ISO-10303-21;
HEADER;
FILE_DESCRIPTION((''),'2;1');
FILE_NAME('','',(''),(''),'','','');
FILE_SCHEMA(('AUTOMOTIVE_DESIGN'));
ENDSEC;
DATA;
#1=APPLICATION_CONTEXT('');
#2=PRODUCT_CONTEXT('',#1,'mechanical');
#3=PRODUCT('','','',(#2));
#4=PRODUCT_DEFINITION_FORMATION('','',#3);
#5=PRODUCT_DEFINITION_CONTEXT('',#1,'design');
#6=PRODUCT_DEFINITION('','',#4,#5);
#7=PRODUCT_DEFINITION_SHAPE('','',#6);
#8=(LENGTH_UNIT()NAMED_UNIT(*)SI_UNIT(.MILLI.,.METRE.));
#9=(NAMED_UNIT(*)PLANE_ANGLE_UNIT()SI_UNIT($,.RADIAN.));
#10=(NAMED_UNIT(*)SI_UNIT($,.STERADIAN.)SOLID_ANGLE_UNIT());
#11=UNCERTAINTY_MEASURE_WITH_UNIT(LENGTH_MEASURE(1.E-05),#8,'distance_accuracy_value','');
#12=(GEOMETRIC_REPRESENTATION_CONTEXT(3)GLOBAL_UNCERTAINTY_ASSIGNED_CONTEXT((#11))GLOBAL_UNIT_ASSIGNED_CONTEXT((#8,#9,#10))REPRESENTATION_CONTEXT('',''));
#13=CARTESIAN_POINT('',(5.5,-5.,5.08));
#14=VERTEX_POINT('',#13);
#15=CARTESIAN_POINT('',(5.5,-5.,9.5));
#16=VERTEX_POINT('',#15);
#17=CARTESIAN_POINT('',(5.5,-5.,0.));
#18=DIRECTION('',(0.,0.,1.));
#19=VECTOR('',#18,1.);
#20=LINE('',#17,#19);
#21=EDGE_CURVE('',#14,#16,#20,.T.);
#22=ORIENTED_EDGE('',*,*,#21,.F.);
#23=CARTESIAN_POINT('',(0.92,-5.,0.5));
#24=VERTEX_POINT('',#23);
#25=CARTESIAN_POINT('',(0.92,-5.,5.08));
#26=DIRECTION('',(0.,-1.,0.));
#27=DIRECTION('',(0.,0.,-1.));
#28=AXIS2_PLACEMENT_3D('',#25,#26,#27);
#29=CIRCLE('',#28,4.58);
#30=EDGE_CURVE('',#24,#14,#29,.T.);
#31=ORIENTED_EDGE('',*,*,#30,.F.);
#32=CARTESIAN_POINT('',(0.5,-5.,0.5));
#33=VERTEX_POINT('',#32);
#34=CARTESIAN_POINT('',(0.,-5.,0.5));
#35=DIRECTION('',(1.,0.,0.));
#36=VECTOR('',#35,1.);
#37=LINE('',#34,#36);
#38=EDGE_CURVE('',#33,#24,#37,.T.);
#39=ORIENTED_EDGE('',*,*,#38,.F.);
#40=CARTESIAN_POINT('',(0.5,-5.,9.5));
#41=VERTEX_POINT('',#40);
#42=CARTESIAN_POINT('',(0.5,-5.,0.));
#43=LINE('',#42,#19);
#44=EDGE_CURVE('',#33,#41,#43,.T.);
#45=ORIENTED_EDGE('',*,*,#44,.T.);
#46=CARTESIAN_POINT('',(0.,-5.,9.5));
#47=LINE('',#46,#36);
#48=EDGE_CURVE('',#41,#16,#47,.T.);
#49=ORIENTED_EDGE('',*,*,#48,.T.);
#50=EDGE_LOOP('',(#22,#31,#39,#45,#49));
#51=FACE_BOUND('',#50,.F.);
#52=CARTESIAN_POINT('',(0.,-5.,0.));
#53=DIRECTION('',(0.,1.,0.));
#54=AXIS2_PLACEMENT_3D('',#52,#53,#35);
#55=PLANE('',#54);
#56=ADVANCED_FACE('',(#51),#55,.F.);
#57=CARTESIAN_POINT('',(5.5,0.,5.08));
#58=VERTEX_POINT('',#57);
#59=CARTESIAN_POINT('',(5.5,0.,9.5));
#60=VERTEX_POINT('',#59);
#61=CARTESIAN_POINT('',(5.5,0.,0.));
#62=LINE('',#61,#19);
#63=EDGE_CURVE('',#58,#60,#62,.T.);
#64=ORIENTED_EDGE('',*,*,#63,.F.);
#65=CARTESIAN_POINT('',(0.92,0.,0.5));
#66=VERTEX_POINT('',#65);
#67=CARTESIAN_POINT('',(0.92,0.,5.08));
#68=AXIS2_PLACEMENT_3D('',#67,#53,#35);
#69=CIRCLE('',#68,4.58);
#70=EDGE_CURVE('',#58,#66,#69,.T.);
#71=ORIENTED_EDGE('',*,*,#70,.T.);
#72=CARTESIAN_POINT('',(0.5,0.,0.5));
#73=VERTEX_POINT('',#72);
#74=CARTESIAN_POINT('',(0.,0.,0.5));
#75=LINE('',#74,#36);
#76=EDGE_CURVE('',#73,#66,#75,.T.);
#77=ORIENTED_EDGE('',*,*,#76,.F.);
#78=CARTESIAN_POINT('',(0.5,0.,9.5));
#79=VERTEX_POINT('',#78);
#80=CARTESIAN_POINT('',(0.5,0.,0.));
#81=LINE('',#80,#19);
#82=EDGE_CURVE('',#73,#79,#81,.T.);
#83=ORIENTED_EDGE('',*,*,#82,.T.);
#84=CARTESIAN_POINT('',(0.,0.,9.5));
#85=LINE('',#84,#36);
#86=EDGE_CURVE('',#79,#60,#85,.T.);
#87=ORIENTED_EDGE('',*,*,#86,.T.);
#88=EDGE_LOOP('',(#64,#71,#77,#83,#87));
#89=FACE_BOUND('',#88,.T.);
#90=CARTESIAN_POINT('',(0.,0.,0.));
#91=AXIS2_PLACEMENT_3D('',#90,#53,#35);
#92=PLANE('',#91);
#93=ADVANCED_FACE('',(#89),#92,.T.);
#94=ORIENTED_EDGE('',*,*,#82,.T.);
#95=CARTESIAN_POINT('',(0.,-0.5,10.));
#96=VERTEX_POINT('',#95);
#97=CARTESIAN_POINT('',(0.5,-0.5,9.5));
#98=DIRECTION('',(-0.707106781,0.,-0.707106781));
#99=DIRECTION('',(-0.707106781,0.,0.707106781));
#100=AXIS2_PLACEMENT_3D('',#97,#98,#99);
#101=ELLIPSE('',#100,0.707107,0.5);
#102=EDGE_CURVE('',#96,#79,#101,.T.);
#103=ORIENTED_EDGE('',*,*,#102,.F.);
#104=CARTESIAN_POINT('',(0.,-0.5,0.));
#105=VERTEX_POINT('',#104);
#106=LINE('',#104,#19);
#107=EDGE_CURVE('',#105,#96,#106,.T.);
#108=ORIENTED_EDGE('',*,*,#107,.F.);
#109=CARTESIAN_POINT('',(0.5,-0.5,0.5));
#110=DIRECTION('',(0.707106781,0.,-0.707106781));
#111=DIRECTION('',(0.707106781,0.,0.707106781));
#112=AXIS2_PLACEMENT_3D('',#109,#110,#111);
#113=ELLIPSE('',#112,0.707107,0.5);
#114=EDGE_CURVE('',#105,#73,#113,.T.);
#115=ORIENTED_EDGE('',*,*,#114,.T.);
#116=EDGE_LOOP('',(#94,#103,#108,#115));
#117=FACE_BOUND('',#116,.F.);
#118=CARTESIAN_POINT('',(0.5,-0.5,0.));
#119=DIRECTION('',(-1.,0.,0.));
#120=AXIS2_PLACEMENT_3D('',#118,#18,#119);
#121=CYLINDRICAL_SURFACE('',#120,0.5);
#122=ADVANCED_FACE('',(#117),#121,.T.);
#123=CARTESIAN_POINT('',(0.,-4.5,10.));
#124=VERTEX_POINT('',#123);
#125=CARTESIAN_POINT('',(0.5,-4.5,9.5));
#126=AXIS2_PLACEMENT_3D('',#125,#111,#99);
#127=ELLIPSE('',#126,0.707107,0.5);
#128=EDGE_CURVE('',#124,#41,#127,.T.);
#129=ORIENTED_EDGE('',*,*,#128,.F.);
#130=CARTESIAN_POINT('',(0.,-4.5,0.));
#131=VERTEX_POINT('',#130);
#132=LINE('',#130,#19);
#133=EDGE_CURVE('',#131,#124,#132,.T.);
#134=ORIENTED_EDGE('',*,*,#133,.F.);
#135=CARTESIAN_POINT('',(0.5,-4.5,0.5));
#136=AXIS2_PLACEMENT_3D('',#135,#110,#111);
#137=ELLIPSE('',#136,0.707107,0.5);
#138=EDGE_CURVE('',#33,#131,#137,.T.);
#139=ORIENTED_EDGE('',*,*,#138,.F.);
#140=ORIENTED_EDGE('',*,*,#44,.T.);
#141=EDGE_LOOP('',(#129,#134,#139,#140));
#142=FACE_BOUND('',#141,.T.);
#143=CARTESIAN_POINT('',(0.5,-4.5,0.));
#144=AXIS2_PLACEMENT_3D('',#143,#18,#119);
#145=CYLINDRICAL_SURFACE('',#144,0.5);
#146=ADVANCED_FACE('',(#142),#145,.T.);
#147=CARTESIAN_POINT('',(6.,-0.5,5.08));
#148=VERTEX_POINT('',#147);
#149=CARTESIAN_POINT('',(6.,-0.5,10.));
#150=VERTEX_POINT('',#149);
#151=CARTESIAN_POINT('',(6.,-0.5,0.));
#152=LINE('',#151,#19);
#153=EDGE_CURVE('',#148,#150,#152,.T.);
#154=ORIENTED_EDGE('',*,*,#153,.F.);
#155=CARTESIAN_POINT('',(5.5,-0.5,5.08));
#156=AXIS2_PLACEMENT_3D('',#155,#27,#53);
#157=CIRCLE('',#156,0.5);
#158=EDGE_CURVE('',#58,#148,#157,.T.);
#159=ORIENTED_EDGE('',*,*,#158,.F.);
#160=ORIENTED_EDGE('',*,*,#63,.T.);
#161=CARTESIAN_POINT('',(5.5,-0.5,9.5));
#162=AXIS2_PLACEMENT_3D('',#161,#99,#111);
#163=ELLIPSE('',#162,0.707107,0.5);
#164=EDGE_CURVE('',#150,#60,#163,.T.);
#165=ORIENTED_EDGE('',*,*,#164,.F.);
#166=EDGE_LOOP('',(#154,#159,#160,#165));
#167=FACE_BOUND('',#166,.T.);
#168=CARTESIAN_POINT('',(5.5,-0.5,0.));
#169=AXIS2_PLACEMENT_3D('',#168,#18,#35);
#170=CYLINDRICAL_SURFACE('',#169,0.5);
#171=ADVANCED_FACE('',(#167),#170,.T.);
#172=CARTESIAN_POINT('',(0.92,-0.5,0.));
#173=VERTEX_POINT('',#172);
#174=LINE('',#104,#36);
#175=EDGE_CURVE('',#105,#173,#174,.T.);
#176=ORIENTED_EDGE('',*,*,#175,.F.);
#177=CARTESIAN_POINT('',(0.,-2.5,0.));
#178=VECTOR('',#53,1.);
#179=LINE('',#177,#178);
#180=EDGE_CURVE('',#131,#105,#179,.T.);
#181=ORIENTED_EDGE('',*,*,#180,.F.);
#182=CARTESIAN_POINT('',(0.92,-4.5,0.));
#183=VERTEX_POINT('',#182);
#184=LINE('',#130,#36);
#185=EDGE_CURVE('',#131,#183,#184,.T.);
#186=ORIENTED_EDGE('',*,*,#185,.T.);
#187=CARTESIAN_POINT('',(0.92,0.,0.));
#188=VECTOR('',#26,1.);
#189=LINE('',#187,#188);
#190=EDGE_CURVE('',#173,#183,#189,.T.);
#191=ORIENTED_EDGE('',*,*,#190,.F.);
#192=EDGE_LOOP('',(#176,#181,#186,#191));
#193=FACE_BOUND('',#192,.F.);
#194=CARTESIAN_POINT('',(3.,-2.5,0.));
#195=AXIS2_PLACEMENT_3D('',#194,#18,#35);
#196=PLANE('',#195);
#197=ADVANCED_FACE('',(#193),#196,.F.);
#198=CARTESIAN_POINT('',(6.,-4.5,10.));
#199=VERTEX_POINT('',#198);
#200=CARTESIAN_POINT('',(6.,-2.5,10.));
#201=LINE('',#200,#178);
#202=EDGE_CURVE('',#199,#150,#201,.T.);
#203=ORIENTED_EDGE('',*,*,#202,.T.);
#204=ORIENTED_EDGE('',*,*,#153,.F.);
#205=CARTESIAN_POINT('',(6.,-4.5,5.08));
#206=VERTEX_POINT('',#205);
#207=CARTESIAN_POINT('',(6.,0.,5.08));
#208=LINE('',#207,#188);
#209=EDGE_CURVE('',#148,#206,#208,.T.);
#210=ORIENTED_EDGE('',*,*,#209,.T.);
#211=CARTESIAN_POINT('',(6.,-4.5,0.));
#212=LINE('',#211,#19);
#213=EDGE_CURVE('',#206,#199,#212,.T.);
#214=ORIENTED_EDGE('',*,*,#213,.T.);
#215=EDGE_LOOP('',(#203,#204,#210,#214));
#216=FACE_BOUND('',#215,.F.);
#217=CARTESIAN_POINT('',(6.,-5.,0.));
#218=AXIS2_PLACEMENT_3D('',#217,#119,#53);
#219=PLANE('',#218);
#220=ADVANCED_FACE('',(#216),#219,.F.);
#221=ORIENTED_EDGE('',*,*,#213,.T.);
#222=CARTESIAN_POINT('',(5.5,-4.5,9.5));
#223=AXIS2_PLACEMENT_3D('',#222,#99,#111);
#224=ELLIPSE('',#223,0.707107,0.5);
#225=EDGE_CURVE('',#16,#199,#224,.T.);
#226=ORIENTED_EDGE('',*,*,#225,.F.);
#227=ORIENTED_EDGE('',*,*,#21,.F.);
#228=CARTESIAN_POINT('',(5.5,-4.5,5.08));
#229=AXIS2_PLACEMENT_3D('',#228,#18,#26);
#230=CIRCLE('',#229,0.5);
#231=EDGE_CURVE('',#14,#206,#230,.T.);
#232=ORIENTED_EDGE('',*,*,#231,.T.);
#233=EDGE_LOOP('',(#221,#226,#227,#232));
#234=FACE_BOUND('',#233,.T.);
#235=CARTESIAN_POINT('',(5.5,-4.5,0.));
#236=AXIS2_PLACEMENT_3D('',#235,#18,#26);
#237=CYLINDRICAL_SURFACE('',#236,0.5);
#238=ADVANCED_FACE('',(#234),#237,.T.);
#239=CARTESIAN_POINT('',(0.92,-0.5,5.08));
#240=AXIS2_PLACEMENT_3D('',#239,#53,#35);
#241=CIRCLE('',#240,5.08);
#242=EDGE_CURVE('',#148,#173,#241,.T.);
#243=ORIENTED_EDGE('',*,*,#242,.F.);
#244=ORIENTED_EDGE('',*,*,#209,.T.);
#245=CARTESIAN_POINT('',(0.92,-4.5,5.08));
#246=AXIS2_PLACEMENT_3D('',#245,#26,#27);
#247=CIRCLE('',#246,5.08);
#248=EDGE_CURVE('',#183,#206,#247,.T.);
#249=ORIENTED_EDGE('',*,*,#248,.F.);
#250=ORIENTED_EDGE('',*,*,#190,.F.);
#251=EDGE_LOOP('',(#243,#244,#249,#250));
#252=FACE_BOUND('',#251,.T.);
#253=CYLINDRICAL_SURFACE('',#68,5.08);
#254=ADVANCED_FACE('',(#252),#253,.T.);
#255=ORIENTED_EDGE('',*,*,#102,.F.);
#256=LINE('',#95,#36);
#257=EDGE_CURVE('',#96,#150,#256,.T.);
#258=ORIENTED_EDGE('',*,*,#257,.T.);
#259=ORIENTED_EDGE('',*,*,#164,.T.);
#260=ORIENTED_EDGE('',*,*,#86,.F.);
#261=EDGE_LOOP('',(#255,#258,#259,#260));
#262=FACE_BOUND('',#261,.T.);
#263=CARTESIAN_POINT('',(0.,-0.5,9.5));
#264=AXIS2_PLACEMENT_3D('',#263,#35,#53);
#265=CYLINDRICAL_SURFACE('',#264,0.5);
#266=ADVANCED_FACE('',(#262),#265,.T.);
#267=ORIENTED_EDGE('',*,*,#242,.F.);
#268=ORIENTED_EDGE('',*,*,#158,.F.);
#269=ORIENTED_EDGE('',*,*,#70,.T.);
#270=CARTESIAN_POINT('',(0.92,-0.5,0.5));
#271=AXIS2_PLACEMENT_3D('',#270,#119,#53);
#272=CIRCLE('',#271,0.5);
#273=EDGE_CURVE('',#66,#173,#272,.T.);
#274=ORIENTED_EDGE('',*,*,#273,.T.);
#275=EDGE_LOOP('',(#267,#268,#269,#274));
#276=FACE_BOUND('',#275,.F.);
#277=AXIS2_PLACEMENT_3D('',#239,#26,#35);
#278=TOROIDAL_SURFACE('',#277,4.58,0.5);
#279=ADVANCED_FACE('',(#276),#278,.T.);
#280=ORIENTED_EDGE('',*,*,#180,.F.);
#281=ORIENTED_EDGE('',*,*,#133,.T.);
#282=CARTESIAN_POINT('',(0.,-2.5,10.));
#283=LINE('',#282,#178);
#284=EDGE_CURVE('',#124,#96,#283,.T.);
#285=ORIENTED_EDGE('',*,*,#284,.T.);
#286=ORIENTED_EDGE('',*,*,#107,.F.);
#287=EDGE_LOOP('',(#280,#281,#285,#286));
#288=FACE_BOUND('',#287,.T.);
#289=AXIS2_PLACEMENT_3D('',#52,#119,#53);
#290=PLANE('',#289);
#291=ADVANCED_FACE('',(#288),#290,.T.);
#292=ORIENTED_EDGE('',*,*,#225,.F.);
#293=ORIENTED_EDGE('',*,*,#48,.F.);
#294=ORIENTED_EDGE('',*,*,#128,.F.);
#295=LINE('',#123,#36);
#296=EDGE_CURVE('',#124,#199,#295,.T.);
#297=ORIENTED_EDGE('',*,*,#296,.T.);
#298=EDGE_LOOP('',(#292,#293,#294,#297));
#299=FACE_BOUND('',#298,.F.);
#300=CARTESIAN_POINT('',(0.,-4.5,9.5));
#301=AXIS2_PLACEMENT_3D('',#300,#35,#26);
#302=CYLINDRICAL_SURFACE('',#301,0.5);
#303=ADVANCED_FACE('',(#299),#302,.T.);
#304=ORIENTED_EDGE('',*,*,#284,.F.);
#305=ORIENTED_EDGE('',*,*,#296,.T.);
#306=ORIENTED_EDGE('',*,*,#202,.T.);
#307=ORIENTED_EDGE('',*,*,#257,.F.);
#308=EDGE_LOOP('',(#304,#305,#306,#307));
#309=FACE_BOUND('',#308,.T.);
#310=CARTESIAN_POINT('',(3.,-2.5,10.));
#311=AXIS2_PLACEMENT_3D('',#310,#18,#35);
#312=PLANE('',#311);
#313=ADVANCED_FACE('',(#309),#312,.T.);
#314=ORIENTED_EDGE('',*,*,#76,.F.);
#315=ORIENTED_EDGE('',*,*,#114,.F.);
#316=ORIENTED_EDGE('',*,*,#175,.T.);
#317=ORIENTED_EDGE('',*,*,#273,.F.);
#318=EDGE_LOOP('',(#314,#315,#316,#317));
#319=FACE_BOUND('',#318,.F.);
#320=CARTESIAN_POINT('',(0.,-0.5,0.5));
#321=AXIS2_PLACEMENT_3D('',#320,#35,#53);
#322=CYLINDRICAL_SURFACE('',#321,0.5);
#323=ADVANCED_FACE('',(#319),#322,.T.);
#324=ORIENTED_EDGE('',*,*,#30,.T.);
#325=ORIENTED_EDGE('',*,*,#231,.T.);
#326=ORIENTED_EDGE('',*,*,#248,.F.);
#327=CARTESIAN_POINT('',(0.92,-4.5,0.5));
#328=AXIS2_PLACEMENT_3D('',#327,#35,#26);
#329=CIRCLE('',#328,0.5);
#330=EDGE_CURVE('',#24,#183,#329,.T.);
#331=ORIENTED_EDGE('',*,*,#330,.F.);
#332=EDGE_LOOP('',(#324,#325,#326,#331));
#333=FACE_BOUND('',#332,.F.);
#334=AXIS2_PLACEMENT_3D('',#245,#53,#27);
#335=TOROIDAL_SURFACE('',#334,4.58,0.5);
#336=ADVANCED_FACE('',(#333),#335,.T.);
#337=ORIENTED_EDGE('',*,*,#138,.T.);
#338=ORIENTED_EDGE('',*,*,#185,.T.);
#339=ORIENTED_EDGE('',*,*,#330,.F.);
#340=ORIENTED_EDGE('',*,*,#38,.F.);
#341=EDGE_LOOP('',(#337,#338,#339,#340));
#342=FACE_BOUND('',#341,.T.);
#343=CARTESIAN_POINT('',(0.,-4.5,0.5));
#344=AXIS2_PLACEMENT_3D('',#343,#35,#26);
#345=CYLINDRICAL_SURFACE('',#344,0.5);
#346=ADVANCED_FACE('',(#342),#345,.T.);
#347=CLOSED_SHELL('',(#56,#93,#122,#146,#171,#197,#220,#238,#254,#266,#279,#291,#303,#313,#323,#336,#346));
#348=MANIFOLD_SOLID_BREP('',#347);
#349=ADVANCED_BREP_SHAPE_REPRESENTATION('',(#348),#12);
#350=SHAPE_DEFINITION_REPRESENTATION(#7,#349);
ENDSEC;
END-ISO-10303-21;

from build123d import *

# Parameters (mm, degrees)
F0_W        = 6
F0_H        = 5
F1_DEPTH    = 10
F2_R        = 0.5
F3_T1_DEPTH = 5
F3_T4_ANGLE = 90
F3_T6_ANGLE = 90


# Not quite as in the source:
# - a fillet or chamfer that OpenCascade refuses, or shapes differently, is made with other operations: its cross-section is extruded or revolved along the edge and cut away or added


with BuildPart() as f1:
    # F0 (on Top) → F1 (new body)
    with BuildSketch(Plane.XY):
        with Locations((3, -2.5)):
            Rectangle(F0_W, F0_H)
    extrude(amount=F1_DEPTH)

    # F2
    f2_edges = [f1.edges().sort_by_distance(p)[0] for p in [
        (6, 0, 5),
        (0, 0, 5),
        (3, 0, 0),
        (3, 0, 10),
        (3, -5, 0),
        (0, -5, 5),
        (6, -5, 5),
        (3, -5, 10),
    ]]
    fillet(f2_edges, radius=F2_R)

    # F3: fillet of radius 5.08 on 1 edges, made by hand

    # F3_s2 → F3_t1 (cut)
    with BuildSketch(Plane.XZ):
        with BuildLine():
            ThreePointArc((6, 5.08), (4.5121024484, 1.4878975516), (0.92, 0))
            Line((0.92, 0), (6, 0))
            Line((6, 0), (6, 5.08))
        make_face()
    extrude(amount=F3_T1_DEPTH, mode=Mode.SUBTRACT)

    # F3_s3 → F3_t4 (revolve, cut)
    with BuildSketch(Plane.YZ.offset(0.92)):
        with BuildLine():
            ThreePointArc((-5, 0.5), (-4.8535533906, 0.1464466094), (-4.5, 0))
            Line((-4.5, 0), (-5, 0))
            Line((-5, 0), (-5, 0.5))
        make_face()
    revolve(axis=Axis((0.92, -5, 5.08), (0, -1, 0)), revolution_arc=F3_T4_ANGLE, mode=Mode.SUBTRACT)

    # F3_s5 → F3_t6 (revolve, cut)
    with BuildSketch(Plane.XY.offset(5.08)):
        with BuildLine():
            ThreePointArc((5.5, 0), (5.8535533906, -0.1464466094), (6, -0.5))
            Line((6, -0.5), (6, 0))
            Line((6, 0), (5.5, 0))
        make_face()
    revolve(axis=Axis((0.92, 0, 5.08), (0, 1, 0)), revolution_arc=F3_T6_ANGLE, mode=Mode.SUBTRACT)


solid = f1.part
